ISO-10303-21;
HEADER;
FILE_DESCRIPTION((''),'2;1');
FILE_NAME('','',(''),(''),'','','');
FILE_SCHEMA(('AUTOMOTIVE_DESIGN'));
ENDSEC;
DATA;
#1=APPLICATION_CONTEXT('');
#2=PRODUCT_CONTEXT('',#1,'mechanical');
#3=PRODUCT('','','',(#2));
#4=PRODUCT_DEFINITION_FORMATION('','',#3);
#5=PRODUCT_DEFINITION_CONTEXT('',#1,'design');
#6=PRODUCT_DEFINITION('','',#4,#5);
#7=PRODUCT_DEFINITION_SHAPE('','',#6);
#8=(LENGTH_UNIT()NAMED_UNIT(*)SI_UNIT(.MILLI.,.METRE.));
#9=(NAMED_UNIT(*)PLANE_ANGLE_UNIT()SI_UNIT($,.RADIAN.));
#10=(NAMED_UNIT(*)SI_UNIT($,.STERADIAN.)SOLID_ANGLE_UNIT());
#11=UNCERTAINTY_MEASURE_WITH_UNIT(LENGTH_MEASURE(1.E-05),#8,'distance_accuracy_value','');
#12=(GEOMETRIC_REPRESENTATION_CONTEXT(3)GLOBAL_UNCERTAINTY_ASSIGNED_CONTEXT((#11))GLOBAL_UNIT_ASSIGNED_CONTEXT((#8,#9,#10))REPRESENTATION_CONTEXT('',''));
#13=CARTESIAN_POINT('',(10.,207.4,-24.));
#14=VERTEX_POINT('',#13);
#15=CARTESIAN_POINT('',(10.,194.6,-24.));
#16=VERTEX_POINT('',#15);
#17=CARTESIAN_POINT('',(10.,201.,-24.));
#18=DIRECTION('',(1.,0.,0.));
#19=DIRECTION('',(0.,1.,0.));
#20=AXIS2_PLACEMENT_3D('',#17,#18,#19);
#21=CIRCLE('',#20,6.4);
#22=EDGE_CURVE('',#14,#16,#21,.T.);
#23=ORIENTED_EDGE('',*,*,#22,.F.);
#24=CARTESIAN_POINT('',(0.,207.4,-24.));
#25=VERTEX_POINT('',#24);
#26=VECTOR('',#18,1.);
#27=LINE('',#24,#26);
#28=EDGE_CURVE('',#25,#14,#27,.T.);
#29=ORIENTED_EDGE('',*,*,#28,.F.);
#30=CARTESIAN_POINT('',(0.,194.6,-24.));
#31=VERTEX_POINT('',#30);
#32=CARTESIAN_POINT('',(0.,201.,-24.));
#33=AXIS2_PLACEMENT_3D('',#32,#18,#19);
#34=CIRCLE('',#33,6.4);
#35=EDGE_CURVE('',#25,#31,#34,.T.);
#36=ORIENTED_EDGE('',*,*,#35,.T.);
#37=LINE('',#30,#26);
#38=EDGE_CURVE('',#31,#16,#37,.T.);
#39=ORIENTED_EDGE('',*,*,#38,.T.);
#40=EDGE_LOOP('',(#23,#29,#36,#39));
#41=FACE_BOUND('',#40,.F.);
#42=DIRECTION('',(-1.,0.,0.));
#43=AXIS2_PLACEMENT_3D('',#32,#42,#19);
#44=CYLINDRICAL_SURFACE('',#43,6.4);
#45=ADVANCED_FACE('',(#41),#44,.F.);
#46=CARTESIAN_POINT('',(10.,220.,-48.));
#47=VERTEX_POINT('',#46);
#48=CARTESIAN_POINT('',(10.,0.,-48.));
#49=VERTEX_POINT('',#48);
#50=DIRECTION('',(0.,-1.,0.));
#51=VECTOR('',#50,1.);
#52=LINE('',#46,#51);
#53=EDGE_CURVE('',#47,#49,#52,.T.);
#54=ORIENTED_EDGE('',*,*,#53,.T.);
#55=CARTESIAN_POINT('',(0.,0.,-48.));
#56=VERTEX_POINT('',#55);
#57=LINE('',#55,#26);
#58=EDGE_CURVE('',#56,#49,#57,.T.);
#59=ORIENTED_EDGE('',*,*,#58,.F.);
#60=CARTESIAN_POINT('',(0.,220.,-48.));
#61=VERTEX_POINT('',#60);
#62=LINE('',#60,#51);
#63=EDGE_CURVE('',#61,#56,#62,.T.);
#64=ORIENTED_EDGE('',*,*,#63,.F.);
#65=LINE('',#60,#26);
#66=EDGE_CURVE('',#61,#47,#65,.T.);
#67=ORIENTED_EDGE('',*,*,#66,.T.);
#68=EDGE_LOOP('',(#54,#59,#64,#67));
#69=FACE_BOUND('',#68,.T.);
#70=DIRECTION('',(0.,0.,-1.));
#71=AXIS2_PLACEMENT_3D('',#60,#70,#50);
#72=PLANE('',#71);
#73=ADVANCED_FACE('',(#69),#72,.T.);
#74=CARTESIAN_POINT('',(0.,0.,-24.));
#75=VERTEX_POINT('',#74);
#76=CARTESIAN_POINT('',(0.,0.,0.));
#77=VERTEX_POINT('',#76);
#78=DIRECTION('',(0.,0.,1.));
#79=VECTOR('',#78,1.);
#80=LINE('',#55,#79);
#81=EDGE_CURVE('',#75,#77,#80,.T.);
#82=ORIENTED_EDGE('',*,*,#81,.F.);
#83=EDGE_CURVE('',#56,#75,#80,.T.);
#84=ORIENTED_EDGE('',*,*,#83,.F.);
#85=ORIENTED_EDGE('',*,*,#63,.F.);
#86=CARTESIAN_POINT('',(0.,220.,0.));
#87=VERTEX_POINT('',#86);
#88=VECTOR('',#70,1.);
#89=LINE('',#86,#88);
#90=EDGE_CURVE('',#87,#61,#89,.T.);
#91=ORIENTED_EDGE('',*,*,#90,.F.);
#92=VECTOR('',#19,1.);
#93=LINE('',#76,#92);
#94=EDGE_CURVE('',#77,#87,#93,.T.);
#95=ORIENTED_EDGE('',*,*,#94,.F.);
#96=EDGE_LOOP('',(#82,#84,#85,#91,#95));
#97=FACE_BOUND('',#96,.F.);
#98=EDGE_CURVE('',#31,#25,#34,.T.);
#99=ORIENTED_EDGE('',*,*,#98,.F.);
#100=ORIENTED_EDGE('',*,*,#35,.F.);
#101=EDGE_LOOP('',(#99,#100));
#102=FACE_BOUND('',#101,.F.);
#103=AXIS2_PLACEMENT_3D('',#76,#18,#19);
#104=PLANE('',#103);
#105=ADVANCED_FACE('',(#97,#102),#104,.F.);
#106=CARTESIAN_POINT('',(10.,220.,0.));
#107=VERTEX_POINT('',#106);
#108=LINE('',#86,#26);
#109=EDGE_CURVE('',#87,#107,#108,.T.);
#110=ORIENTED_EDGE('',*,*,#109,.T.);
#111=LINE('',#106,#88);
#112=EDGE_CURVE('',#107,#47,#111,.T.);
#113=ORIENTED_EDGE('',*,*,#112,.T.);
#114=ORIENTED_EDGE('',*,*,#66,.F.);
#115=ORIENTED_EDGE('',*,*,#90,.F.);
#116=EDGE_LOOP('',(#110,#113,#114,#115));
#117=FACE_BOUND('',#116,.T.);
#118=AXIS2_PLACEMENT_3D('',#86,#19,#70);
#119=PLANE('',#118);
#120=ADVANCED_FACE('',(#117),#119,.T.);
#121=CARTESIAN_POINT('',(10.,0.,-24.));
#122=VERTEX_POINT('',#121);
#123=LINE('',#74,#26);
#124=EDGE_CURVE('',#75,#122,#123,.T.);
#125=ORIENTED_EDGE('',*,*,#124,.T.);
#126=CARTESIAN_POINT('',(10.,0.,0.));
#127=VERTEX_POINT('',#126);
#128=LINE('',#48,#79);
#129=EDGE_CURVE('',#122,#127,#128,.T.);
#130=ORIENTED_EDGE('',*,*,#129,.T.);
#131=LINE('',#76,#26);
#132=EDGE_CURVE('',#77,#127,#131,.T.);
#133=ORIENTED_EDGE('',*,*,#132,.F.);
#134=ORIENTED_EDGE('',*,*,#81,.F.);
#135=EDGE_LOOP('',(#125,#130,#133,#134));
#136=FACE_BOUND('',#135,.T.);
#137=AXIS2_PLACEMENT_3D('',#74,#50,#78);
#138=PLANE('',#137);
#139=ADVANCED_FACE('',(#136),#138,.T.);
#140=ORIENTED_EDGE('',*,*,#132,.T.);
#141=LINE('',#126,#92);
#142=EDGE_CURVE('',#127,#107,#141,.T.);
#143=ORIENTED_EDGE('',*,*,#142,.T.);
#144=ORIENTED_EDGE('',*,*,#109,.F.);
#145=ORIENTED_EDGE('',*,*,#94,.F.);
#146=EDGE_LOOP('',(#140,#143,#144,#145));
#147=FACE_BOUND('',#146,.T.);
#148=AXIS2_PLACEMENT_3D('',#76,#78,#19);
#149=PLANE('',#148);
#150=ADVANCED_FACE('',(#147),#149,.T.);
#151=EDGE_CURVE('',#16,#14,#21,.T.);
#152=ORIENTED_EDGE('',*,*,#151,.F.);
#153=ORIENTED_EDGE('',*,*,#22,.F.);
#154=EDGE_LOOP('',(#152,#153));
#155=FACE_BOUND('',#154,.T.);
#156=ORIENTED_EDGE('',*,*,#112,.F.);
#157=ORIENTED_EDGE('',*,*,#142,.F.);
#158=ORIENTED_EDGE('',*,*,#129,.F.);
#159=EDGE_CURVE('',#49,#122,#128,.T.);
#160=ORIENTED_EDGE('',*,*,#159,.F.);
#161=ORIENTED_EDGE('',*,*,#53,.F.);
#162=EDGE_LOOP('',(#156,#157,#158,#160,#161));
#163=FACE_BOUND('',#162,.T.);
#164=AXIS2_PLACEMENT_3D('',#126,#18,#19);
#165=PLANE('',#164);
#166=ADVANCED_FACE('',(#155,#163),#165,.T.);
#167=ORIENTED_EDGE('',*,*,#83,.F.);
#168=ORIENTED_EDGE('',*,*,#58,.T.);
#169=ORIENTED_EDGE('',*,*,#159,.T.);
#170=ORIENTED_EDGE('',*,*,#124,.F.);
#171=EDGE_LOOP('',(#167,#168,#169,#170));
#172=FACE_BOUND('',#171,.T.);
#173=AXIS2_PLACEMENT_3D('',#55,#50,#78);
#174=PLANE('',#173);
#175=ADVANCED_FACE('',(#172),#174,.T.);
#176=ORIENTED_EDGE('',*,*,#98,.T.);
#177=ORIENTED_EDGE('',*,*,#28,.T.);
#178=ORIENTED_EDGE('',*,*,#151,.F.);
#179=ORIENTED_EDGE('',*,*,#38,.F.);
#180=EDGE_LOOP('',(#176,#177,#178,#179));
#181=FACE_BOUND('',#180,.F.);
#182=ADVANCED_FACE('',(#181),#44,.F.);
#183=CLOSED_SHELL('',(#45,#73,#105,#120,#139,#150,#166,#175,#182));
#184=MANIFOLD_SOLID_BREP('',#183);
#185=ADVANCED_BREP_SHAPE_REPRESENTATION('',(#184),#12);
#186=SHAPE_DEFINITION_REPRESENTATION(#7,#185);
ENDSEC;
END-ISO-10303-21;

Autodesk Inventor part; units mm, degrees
ref_plane "YZ Plane" through (0, 0, 0) normal (1, 0, 0) x (0, 1, 0)
ref_plane "XZ Plane" through (0, 0, 0) normal (0, 1, 0) x (-1, 0, 0)
ref_plane "XY Plane" through (0, 0, 0) normal (0, 0, 1) x (1, 0, 0)
sketch "Sketch1" plane through (0, 0, 0) normal (1, 0, 0) x (0, 1, 0)
  line L0 (0, 0) -> (220, 0)
  line L1 (220, 0) -> (220, -48)
  line L2 (220, -48) -> (0, -48)
  line L3 (0, -48) -> (0, 0)
  line L4 (0, -24) -> (201, -24)
  circle A0 centre (201, -24) radius 6.4
  dimension "d0" = 220
  dimension "d1" = 48
  dimension "d2" = 201
  dimension "d3" = 12.8
extrude "Extrusion1" add sketch "Sketch1" along normal blind 10
properties part number "tallwall2"
